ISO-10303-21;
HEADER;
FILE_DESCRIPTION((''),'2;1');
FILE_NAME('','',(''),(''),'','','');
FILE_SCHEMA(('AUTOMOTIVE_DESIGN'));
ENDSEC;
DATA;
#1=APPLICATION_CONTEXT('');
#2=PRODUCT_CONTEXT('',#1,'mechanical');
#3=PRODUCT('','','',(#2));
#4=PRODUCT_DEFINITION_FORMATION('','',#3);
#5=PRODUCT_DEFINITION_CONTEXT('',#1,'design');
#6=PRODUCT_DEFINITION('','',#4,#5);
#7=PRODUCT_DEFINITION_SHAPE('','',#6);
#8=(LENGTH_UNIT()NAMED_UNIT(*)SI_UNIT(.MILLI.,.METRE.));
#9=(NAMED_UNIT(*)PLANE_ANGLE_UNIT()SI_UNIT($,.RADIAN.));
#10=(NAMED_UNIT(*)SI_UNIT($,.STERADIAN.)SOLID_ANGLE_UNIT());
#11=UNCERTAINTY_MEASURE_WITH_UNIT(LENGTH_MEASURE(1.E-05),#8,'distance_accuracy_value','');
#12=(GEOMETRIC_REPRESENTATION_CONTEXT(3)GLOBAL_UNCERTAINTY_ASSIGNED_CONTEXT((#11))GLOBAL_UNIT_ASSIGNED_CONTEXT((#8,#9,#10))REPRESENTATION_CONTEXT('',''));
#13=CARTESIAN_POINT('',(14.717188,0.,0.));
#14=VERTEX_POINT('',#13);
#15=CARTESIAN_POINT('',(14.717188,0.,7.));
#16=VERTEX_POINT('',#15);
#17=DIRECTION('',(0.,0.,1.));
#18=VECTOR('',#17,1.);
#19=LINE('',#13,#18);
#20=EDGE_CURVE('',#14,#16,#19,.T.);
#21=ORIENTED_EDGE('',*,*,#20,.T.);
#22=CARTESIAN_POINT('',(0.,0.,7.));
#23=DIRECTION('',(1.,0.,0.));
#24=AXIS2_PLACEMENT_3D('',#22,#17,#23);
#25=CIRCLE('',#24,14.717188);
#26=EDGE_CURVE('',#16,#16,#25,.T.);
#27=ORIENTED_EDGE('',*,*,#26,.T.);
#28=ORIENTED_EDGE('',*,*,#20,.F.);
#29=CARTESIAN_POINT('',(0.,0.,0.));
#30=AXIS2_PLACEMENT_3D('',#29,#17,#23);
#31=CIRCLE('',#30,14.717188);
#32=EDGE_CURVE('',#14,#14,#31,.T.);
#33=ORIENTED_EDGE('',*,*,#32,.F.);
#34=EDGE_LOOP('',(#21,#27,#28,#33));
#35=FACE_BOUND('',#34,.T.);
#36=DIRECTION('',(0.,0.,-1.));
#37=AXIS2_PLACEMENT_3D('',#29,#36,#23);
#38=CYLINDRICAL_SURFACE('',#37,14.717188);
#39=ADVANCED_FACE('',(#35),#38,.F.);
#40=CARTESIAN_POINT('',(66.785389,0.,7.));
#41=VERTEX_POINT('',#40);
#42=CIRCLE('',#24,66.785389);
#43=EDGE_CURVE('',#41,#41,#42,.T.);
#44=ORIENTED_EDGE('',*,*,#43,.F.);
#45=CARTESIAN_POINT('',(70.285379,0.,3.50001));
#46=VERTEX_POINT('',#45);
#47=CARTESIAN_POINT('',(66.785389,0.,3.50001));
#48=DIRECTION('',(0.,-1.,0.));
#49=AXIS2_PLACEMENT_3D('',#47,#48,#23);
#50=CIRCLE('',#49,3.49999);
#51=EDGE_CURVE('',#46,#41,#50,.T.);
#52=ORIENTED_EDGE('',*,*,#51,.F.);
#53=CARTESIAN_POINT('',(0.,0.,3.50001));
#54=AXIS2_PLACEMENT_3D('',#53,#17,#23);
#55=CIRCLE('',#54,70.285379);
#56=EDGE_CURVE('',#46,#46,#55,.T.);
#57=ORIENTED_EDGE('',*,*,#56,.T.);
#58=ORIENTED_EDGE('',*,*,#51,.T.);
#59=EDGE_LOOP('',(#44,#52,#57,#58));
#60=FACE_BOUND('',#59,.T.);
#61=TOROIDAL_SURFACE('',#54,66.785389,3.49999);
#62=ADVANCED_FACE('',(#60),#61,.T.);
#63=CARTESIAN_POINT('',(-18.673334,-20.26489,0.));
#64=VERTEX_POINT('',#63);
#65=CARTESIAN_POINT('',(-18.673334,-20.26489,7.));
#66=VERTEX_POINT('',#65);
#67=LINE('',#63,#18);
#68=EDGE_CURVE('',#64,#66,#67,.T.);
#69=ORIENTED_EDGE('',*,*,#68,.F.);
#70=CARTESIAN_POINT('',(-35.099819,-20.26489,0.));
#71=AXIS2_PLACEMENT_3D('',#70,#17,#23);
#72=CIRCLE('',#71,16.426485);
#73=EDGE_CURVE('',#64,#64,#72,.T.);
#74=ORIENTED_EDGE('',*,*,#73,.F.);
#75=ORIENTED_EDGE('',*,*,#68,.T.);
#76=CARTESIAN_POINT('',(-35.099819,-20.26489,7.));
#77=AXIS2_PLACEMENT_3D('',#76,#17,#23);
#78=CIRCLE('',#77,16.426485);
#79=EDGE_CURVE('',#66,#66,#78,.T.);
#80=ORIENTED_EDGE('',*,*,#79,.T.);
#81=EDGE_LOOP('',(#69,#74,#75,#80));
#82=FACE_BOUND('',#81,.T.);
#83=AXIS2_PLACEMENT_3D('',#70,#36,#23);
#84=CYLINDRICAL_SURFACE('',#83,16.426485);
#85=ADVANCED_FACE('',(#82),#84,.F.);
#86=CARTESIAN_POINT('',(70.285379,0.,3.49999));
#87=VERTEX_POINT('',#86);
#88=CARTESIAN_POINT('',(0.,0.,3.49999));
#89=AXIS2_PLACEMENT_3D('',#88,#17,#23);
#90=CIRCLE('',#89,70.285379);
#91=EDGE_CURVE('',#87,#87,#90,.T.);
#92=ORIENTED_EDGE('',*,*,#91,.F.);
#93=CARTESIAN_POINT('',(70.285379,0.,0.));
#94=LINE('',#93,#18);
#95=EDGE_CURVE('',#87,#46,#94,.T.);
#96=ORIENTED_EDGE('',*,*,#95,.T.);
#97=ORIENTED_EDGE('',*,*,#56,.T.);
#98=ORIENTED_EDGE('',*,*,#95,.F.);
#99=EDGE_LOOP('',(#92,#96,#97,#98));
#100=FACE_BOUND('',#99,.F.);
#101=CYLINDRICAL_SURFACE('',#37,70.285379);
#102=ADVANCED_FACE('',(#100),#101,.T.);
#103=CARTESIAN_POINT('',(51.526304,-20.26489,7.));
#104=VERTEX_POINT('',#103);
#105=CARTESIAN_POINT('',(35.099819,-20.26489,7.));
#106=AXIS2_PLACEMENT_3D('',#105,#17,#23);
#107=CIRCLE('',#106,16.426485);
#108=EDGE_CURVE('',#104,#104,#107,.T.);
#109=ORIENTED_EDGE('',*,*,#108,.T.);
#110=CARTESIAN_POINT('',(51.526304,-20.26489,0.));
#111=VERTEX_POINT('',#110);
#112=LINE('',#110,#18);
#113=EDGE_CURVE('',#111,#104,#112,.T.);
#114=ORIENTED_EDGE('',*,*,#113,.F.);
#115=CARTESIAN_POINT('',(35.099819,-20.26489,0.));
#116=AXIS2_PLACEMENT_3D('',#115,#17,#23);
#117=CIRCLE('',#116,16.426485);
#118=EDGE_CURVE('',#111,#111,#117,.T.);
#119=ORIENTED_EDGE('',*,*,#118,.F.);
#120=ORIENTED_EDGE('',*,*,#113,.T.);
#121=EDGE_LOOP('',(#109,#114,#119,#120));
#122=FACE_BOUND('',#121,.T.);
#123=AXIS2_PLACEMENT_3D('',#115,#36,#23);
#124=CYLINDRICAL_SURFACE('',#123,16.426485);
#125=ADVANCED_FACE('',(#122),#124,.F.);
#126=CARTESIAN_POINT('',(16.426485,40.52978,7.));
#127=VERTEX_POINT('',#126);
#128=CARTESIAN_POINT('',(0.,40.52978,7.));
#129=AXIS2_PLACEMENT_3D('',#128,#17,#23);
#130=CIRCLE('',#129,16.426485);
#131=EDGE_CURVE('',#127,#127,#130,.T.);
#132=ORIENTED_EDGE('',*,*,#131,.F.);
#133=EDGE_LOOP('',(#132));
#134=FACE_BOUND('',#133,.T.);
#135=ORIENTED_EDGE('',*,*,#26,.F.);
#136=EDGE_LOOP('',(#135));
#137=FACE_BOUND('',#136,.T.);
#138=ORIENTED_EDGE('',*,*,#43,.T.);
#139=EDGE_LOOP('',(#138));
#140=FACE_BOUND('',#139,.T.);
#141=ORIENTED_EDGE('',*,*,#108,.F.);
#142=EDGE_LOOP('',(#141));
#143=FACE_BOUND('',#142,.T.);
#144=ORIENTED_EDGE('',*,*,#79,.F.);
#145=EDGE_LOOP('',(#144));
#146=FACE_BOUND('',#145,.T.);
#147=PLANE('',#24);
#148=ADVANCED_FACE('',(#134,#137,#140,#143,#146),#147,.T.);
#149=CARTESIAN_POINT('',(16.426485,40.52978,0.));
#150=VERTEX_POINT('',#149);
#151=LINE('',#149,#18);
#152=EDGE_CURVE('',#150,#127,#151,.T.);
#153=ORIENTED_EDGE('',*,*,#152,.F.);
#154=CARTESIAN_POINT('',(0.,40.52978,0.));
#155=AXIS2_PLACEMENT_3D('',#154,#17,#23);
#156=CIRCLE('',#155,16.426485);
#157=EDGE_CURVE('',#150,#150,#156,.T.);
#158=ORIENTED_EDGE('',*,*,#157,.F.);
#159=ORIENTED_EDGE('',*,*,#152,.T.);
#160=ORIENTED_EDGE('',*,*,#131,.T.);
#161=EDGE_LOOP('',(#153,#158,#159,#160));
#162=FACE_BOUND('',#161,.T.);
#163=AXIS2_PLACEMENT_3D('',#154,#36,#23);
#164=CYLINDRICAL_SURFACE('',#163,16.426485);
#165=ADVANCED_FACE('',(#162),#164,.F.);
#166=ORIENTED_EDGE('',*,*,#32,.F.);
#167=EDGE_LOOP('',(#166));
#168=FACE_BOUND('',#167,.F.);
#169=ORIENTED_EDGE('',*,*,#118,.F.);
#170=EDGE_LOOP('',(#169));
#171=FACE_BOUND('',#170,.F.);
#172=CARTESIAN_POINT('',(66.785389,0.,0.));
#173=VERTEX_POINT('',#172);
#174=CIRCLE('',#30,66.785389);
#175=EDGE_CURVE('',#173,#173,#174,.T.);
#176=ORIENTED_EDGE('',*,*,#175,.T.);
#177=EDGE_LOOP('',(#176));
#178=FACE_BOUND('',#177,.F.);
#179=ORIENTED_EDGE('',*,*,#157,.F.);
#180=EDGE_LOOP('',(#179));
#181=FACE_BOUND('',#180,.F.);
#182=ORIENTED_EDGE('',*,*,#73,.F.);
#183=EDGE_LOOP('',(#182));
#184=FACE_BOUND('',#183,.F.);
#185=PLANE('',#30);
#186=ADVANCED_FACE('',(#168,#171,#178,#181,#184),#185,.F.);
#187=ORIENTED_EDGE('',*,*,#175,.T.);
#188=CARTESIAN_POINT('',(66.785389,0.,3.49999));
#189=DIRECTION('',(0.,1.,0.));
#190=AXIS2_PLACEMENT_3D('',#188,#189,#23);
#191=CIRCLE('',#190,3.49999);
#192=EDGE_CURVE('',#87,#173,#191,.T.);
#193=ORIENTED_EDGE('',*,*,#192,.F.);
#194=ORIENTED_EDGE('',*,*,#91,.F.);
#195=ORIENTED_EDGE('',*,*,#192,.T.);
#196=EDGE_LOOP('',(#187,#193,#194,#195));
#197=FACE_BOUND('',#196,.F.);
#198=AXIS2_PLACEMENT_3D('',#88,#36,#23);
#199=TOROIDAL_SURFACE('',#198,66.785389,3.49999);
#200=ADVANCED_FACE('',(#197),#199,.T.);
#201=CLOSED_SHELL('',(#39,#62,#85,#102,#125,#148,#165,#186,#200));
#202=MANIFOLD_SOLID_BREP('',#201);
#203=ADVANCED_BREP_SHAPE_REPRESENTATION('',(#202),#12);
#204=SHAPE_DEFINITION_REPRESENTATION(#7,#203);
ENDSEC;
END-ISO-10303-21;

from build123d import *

# Parameters (mm, degrees)
F0_R     = 70.2853794577
F0_R_2   = 16.4264849476
F0_R_3   = 14.7171878195
F1_DEPTH = 7
F2_R     = 3.49999


# Not quite as in the source:
# - a fillet or chamfer is up to 0.001 mm smaller than in the source, because OpenCascade refuses the exact size


with BuildPart() as f1:
    # F0 (on Top) → F1 (new body)
    with BuildSketch(Plane.XY):
        Circle(F0_R)
        with Locations((-35.0998191676, -20.2648900449)):
            Circle(F0_R_2, mode=Mode.SUBTRACT)
        Circle(F0_R_3, mode=Mode.SUBTRACT)
        with Locations((35.0998191676, -20.2648900449)):
            Circle(F0_R_2, mode=Mode.SUBTRACT)
        with Locations((0, 40.5297800899)):
            Circle(F0_R_2, mode=Mode.SUBTRACT)
    extrude(amount=F1_DEPTH)

    # F2 (radius 3.5 in the source; OpenCascade refuses exactly that, so slightly less here)
    f2_edges = [f1.edges().sort_by_distance(p)[0] for p in [
        (-70.285379, 0, 7),
        (-70.285379, 0, 0),
    ]]
    fillet(f2_edges, radius=F2_R)


solid = f1.part
